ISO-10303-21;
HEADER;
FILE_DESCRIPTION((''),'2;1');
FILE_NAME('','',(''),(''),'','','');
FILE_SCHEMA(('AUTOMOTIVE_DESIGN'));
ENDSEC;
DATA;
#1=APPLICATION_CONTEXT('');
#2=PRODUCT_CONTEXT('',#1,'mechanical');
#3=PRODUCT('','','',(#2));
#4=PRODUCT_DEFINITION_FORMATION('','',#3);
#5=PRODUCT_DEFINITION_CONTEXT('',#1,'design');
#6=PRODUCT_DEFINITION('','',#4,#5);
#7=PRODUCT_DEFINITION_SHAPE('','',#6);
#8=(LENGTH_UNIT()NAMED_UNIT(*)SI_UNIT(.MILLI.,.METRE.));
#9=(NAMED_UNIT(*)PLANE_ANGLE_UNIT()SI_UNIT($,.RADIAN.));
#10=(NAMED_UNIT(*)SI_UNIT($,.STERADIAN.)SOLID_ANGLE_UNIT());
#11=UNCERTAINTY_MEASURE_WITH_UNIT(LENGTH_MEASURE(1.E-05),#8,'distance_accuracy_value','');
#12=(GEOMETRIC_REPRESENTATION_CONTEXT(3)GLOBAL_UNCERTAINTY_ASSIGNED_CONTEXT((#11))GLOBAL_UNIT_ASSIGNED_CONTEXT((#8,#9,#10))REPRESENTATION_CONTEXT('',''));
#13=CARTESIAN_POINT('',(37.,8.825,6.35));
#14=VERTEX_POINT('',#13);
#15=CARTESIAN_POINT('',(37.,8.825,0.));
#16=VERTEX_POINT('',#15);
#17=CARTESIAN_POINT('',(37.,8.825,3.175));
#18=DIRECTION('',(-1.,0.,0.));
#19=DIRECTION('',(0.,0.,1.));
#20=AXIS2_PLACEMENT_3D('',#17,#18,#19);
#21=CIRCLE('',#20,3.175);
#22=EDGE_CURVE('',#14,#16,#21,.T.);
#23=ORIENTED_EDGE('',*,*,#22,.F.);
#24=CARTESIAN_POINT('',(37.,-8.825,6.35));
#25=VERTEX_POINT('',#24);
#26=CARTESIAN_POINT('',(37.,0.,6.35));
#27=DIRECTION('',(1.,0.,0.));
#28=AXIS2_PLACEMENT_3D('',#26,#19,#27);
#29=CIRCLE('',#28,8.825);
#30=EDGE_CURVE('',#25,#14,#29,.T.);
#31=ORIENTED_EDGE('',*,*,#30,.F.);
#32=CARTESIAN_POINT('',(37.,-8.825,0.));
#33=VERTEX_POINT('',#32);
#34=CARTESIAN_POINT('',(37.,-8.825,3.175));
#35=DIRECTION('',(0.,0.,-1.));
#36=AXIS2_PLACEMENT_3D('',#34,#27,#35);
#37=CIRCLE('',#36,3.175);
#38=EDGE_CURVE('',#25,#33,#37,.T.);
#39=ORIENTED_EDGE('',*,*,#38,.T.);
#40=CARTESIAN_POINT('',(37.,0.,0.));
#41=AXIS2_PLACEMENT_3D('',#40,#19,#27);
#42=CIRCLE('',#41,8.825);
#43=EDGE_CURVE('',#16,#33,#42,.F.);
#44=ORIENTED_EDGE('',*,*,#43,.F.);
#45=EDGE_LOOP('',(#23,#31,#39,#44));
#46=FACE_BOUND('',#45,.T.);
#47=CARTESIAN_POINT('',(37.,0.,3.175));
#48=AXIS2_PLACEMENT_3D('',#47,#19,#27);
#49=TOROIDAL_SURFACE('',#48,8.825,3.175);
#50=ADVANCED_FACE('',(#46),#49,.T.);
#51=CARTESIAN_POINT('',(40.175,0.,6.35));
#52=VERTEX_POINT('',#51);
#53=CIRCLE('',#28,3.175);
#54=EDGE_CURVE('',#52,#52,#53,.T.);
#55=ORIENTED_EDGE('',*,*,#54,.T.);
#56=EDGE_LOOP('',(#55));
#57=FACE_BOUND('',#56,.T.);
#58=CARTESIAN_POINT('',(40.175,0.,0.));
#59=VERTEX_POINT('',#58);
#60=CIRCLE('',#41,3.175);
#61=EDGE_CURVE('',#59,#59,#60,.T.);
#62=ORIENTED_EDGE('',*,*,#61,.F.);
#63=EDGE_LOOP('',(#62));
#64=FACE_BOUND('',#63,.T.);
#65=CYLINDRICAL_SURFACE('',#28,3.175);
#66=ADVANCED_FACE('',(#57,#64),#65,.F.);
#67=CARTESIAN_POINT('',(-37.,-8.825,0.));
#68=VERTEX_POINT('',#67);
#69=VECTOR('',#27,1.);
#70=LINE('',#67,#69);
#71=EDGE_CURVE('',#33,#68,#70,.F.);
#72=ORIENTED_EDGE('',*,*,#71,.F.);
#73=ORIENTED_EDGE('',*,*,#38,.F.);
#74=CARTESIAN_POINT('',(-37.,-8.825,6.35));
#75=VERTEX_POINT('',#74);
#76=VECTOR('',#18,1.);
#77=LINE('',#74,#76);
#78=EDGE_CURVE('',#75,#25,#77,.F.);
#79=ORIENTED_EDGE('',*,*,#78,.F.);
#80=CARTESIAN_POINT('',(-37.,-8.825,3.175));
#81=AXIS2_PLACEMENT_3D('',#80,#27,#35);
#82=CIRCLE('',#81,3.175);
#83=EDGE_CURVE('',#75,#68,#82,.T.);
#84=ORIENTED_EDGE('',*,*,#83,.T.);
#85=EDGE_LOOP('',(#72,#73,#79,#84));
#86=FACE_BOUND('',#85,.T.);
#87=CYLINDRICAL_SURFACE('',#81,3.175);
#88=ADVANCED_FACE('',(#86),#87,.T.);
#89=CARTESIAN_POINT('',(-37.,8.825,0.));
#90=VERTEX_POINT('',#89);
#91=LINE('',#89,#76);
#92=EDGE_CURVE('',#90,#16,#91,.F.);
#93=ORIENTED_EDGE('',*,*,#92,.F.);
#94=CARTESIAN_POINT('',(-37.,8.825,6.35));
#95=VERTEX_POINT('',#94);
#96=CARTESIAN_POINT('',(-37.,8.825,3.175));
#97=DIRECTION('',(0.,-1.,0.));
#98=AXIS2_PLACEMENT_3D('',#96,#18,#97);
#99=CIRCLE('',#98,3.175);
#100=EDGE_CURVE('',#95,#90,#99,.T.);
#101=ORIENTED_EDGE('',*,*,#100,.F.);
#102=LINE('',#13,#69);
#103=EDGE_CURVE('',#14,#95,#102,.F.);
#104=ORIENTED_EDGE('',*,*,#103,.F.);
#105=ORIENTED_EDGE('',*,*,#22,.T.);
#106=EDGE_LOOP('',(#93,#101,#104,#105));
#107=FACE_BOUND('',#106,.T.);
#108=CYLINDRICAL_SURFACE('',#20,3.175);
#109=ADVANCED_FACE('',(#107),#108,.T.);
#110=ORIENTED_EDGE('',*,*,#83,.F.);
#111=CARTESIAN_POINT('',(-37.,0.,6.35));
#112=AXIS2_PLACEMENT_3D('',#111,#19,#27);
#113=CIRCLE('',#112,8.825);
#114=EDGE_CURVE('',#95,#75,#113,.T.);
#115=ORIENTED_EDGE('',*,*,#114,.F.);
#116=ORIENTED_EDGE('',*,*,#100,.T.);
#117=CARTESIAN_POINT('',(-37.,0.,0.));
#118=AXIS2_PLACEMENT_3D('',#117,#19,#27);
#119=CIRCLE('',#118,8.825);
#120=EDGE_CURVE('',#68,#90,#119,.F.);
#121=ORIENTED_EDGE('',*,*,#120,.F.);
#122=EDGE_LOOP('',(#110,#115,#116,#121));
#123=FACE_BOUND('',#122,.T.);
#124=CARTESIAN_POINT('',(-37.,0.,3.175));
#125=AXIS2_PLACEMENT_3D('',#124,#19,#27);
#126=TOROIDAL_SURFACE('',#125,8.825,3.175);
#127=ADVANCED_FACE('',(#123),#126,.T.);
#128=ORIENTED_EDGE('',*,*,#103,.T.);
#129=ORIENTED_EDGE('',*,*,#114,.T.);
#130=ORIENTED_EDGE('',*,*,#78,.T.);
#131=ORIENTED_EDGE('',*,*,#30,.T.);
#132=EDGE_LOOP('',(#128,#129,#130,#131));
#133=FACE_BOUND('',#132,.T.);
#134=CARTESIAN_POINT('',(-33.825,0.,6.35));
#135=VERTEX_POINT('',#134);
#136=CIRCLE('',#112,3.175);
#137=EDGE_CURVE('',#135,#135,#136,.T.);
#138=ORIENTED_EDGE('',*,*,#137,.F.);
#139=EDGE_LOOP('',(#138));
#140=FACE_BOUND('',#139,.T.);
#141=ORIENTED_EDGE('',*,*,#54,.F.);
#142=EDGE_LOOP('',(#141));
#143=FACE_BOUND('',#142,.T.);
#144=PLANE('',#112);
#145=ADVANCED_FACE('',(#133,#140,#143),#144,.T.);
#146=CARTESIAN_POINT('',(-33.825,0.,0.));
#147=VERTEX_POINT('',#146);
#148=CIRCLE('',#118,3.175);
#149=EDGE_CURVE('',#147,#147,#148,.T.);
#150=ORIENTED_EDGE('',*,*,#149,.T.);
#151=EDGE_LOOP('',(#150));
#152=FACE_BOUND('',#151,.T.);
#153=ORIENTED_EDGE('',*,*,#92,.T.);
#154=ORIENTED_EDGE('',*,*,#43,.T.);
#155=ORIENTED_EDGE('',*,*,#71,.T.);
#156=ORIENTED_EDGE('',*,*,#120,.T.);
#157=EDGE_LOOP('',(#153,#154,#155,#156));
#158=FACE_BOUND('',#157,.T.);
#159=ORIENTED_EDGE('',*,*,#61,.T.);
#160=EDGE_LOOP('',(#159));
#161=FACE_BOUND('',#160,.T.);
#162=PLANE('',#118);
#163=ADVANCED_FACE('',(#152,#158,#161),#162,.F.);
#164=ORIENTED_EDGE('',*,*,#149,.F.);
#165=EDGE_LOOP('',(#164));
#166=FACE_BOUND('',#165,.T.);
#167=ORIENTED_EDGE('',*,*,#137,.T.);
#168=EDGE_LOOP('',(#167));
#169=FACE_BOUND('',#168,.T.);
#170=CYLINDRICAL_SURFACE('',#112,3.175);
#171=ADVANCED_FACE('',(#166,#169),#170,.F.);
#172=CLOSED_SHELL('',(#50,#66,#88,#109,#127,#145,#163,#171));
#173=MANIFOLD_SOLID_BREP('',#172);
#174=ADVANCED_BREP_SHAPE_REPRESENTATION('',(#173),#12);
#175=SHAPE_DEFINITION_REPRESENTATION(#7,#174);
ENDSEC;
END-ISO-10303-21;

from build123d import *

# Parameters (mm, degrees)
BOSS_EXTRUDE1_DEPTH         = 6.35
F_1_4_0_25_DIAMETER_HOLE1_D = 6.35
FILLET1_R                   = 3.175


with BuildPart() as part:
    # Sketch1 → Boss-Extrude1 (new body)
    with BuildSketch(Plane.XY):
        with BuildLine():
            Line((-37.000000041, 11.999999876), (37.000000041, 11.999999876))
            ThreePointArc((37.000000041, 11.999999876), (48.999999917, 0), (37.000000041, -11.999999876))
            Line((37.000000041, -11.999999876), (-37.000000041, -11.999999876))
            ThreePointArc((-37.000000041, -11.999999876), (-48.999999917, 0), (-37.000000041, 11.999999876))
        make_face()
    extrude(amount=BOSS_EXTRUDE1_DEPTH)

    # 1/4 (0.25) Diameter Hole1 (through all)
    with Locations(Plane.XY.offset(6.35)):
        with Locations((-37.000000041, 0), (37.000000041, 0)):
            Hole(F_1_4_0_25_DIAMETER_HOLE1_D / 2)

    # Fillet1
    fillet1_edges = [part.edges().sort_by_distance(p)[0] for p in [
        (48.999999917, 0, 6.35),
        (0, 11.999999876, 6.35),
        (-48.999999917, 0, 6.35),
        (0, 11.999999876, 0),
        (0, -11.999999876, 0),
        (0, -11.999999876, 6.35),
    ]]
    fillet(fillet1_edges, radius=FILLET1_R - 0.0001)  # a hair under: the kernel refuses the full size


solid = part.part
